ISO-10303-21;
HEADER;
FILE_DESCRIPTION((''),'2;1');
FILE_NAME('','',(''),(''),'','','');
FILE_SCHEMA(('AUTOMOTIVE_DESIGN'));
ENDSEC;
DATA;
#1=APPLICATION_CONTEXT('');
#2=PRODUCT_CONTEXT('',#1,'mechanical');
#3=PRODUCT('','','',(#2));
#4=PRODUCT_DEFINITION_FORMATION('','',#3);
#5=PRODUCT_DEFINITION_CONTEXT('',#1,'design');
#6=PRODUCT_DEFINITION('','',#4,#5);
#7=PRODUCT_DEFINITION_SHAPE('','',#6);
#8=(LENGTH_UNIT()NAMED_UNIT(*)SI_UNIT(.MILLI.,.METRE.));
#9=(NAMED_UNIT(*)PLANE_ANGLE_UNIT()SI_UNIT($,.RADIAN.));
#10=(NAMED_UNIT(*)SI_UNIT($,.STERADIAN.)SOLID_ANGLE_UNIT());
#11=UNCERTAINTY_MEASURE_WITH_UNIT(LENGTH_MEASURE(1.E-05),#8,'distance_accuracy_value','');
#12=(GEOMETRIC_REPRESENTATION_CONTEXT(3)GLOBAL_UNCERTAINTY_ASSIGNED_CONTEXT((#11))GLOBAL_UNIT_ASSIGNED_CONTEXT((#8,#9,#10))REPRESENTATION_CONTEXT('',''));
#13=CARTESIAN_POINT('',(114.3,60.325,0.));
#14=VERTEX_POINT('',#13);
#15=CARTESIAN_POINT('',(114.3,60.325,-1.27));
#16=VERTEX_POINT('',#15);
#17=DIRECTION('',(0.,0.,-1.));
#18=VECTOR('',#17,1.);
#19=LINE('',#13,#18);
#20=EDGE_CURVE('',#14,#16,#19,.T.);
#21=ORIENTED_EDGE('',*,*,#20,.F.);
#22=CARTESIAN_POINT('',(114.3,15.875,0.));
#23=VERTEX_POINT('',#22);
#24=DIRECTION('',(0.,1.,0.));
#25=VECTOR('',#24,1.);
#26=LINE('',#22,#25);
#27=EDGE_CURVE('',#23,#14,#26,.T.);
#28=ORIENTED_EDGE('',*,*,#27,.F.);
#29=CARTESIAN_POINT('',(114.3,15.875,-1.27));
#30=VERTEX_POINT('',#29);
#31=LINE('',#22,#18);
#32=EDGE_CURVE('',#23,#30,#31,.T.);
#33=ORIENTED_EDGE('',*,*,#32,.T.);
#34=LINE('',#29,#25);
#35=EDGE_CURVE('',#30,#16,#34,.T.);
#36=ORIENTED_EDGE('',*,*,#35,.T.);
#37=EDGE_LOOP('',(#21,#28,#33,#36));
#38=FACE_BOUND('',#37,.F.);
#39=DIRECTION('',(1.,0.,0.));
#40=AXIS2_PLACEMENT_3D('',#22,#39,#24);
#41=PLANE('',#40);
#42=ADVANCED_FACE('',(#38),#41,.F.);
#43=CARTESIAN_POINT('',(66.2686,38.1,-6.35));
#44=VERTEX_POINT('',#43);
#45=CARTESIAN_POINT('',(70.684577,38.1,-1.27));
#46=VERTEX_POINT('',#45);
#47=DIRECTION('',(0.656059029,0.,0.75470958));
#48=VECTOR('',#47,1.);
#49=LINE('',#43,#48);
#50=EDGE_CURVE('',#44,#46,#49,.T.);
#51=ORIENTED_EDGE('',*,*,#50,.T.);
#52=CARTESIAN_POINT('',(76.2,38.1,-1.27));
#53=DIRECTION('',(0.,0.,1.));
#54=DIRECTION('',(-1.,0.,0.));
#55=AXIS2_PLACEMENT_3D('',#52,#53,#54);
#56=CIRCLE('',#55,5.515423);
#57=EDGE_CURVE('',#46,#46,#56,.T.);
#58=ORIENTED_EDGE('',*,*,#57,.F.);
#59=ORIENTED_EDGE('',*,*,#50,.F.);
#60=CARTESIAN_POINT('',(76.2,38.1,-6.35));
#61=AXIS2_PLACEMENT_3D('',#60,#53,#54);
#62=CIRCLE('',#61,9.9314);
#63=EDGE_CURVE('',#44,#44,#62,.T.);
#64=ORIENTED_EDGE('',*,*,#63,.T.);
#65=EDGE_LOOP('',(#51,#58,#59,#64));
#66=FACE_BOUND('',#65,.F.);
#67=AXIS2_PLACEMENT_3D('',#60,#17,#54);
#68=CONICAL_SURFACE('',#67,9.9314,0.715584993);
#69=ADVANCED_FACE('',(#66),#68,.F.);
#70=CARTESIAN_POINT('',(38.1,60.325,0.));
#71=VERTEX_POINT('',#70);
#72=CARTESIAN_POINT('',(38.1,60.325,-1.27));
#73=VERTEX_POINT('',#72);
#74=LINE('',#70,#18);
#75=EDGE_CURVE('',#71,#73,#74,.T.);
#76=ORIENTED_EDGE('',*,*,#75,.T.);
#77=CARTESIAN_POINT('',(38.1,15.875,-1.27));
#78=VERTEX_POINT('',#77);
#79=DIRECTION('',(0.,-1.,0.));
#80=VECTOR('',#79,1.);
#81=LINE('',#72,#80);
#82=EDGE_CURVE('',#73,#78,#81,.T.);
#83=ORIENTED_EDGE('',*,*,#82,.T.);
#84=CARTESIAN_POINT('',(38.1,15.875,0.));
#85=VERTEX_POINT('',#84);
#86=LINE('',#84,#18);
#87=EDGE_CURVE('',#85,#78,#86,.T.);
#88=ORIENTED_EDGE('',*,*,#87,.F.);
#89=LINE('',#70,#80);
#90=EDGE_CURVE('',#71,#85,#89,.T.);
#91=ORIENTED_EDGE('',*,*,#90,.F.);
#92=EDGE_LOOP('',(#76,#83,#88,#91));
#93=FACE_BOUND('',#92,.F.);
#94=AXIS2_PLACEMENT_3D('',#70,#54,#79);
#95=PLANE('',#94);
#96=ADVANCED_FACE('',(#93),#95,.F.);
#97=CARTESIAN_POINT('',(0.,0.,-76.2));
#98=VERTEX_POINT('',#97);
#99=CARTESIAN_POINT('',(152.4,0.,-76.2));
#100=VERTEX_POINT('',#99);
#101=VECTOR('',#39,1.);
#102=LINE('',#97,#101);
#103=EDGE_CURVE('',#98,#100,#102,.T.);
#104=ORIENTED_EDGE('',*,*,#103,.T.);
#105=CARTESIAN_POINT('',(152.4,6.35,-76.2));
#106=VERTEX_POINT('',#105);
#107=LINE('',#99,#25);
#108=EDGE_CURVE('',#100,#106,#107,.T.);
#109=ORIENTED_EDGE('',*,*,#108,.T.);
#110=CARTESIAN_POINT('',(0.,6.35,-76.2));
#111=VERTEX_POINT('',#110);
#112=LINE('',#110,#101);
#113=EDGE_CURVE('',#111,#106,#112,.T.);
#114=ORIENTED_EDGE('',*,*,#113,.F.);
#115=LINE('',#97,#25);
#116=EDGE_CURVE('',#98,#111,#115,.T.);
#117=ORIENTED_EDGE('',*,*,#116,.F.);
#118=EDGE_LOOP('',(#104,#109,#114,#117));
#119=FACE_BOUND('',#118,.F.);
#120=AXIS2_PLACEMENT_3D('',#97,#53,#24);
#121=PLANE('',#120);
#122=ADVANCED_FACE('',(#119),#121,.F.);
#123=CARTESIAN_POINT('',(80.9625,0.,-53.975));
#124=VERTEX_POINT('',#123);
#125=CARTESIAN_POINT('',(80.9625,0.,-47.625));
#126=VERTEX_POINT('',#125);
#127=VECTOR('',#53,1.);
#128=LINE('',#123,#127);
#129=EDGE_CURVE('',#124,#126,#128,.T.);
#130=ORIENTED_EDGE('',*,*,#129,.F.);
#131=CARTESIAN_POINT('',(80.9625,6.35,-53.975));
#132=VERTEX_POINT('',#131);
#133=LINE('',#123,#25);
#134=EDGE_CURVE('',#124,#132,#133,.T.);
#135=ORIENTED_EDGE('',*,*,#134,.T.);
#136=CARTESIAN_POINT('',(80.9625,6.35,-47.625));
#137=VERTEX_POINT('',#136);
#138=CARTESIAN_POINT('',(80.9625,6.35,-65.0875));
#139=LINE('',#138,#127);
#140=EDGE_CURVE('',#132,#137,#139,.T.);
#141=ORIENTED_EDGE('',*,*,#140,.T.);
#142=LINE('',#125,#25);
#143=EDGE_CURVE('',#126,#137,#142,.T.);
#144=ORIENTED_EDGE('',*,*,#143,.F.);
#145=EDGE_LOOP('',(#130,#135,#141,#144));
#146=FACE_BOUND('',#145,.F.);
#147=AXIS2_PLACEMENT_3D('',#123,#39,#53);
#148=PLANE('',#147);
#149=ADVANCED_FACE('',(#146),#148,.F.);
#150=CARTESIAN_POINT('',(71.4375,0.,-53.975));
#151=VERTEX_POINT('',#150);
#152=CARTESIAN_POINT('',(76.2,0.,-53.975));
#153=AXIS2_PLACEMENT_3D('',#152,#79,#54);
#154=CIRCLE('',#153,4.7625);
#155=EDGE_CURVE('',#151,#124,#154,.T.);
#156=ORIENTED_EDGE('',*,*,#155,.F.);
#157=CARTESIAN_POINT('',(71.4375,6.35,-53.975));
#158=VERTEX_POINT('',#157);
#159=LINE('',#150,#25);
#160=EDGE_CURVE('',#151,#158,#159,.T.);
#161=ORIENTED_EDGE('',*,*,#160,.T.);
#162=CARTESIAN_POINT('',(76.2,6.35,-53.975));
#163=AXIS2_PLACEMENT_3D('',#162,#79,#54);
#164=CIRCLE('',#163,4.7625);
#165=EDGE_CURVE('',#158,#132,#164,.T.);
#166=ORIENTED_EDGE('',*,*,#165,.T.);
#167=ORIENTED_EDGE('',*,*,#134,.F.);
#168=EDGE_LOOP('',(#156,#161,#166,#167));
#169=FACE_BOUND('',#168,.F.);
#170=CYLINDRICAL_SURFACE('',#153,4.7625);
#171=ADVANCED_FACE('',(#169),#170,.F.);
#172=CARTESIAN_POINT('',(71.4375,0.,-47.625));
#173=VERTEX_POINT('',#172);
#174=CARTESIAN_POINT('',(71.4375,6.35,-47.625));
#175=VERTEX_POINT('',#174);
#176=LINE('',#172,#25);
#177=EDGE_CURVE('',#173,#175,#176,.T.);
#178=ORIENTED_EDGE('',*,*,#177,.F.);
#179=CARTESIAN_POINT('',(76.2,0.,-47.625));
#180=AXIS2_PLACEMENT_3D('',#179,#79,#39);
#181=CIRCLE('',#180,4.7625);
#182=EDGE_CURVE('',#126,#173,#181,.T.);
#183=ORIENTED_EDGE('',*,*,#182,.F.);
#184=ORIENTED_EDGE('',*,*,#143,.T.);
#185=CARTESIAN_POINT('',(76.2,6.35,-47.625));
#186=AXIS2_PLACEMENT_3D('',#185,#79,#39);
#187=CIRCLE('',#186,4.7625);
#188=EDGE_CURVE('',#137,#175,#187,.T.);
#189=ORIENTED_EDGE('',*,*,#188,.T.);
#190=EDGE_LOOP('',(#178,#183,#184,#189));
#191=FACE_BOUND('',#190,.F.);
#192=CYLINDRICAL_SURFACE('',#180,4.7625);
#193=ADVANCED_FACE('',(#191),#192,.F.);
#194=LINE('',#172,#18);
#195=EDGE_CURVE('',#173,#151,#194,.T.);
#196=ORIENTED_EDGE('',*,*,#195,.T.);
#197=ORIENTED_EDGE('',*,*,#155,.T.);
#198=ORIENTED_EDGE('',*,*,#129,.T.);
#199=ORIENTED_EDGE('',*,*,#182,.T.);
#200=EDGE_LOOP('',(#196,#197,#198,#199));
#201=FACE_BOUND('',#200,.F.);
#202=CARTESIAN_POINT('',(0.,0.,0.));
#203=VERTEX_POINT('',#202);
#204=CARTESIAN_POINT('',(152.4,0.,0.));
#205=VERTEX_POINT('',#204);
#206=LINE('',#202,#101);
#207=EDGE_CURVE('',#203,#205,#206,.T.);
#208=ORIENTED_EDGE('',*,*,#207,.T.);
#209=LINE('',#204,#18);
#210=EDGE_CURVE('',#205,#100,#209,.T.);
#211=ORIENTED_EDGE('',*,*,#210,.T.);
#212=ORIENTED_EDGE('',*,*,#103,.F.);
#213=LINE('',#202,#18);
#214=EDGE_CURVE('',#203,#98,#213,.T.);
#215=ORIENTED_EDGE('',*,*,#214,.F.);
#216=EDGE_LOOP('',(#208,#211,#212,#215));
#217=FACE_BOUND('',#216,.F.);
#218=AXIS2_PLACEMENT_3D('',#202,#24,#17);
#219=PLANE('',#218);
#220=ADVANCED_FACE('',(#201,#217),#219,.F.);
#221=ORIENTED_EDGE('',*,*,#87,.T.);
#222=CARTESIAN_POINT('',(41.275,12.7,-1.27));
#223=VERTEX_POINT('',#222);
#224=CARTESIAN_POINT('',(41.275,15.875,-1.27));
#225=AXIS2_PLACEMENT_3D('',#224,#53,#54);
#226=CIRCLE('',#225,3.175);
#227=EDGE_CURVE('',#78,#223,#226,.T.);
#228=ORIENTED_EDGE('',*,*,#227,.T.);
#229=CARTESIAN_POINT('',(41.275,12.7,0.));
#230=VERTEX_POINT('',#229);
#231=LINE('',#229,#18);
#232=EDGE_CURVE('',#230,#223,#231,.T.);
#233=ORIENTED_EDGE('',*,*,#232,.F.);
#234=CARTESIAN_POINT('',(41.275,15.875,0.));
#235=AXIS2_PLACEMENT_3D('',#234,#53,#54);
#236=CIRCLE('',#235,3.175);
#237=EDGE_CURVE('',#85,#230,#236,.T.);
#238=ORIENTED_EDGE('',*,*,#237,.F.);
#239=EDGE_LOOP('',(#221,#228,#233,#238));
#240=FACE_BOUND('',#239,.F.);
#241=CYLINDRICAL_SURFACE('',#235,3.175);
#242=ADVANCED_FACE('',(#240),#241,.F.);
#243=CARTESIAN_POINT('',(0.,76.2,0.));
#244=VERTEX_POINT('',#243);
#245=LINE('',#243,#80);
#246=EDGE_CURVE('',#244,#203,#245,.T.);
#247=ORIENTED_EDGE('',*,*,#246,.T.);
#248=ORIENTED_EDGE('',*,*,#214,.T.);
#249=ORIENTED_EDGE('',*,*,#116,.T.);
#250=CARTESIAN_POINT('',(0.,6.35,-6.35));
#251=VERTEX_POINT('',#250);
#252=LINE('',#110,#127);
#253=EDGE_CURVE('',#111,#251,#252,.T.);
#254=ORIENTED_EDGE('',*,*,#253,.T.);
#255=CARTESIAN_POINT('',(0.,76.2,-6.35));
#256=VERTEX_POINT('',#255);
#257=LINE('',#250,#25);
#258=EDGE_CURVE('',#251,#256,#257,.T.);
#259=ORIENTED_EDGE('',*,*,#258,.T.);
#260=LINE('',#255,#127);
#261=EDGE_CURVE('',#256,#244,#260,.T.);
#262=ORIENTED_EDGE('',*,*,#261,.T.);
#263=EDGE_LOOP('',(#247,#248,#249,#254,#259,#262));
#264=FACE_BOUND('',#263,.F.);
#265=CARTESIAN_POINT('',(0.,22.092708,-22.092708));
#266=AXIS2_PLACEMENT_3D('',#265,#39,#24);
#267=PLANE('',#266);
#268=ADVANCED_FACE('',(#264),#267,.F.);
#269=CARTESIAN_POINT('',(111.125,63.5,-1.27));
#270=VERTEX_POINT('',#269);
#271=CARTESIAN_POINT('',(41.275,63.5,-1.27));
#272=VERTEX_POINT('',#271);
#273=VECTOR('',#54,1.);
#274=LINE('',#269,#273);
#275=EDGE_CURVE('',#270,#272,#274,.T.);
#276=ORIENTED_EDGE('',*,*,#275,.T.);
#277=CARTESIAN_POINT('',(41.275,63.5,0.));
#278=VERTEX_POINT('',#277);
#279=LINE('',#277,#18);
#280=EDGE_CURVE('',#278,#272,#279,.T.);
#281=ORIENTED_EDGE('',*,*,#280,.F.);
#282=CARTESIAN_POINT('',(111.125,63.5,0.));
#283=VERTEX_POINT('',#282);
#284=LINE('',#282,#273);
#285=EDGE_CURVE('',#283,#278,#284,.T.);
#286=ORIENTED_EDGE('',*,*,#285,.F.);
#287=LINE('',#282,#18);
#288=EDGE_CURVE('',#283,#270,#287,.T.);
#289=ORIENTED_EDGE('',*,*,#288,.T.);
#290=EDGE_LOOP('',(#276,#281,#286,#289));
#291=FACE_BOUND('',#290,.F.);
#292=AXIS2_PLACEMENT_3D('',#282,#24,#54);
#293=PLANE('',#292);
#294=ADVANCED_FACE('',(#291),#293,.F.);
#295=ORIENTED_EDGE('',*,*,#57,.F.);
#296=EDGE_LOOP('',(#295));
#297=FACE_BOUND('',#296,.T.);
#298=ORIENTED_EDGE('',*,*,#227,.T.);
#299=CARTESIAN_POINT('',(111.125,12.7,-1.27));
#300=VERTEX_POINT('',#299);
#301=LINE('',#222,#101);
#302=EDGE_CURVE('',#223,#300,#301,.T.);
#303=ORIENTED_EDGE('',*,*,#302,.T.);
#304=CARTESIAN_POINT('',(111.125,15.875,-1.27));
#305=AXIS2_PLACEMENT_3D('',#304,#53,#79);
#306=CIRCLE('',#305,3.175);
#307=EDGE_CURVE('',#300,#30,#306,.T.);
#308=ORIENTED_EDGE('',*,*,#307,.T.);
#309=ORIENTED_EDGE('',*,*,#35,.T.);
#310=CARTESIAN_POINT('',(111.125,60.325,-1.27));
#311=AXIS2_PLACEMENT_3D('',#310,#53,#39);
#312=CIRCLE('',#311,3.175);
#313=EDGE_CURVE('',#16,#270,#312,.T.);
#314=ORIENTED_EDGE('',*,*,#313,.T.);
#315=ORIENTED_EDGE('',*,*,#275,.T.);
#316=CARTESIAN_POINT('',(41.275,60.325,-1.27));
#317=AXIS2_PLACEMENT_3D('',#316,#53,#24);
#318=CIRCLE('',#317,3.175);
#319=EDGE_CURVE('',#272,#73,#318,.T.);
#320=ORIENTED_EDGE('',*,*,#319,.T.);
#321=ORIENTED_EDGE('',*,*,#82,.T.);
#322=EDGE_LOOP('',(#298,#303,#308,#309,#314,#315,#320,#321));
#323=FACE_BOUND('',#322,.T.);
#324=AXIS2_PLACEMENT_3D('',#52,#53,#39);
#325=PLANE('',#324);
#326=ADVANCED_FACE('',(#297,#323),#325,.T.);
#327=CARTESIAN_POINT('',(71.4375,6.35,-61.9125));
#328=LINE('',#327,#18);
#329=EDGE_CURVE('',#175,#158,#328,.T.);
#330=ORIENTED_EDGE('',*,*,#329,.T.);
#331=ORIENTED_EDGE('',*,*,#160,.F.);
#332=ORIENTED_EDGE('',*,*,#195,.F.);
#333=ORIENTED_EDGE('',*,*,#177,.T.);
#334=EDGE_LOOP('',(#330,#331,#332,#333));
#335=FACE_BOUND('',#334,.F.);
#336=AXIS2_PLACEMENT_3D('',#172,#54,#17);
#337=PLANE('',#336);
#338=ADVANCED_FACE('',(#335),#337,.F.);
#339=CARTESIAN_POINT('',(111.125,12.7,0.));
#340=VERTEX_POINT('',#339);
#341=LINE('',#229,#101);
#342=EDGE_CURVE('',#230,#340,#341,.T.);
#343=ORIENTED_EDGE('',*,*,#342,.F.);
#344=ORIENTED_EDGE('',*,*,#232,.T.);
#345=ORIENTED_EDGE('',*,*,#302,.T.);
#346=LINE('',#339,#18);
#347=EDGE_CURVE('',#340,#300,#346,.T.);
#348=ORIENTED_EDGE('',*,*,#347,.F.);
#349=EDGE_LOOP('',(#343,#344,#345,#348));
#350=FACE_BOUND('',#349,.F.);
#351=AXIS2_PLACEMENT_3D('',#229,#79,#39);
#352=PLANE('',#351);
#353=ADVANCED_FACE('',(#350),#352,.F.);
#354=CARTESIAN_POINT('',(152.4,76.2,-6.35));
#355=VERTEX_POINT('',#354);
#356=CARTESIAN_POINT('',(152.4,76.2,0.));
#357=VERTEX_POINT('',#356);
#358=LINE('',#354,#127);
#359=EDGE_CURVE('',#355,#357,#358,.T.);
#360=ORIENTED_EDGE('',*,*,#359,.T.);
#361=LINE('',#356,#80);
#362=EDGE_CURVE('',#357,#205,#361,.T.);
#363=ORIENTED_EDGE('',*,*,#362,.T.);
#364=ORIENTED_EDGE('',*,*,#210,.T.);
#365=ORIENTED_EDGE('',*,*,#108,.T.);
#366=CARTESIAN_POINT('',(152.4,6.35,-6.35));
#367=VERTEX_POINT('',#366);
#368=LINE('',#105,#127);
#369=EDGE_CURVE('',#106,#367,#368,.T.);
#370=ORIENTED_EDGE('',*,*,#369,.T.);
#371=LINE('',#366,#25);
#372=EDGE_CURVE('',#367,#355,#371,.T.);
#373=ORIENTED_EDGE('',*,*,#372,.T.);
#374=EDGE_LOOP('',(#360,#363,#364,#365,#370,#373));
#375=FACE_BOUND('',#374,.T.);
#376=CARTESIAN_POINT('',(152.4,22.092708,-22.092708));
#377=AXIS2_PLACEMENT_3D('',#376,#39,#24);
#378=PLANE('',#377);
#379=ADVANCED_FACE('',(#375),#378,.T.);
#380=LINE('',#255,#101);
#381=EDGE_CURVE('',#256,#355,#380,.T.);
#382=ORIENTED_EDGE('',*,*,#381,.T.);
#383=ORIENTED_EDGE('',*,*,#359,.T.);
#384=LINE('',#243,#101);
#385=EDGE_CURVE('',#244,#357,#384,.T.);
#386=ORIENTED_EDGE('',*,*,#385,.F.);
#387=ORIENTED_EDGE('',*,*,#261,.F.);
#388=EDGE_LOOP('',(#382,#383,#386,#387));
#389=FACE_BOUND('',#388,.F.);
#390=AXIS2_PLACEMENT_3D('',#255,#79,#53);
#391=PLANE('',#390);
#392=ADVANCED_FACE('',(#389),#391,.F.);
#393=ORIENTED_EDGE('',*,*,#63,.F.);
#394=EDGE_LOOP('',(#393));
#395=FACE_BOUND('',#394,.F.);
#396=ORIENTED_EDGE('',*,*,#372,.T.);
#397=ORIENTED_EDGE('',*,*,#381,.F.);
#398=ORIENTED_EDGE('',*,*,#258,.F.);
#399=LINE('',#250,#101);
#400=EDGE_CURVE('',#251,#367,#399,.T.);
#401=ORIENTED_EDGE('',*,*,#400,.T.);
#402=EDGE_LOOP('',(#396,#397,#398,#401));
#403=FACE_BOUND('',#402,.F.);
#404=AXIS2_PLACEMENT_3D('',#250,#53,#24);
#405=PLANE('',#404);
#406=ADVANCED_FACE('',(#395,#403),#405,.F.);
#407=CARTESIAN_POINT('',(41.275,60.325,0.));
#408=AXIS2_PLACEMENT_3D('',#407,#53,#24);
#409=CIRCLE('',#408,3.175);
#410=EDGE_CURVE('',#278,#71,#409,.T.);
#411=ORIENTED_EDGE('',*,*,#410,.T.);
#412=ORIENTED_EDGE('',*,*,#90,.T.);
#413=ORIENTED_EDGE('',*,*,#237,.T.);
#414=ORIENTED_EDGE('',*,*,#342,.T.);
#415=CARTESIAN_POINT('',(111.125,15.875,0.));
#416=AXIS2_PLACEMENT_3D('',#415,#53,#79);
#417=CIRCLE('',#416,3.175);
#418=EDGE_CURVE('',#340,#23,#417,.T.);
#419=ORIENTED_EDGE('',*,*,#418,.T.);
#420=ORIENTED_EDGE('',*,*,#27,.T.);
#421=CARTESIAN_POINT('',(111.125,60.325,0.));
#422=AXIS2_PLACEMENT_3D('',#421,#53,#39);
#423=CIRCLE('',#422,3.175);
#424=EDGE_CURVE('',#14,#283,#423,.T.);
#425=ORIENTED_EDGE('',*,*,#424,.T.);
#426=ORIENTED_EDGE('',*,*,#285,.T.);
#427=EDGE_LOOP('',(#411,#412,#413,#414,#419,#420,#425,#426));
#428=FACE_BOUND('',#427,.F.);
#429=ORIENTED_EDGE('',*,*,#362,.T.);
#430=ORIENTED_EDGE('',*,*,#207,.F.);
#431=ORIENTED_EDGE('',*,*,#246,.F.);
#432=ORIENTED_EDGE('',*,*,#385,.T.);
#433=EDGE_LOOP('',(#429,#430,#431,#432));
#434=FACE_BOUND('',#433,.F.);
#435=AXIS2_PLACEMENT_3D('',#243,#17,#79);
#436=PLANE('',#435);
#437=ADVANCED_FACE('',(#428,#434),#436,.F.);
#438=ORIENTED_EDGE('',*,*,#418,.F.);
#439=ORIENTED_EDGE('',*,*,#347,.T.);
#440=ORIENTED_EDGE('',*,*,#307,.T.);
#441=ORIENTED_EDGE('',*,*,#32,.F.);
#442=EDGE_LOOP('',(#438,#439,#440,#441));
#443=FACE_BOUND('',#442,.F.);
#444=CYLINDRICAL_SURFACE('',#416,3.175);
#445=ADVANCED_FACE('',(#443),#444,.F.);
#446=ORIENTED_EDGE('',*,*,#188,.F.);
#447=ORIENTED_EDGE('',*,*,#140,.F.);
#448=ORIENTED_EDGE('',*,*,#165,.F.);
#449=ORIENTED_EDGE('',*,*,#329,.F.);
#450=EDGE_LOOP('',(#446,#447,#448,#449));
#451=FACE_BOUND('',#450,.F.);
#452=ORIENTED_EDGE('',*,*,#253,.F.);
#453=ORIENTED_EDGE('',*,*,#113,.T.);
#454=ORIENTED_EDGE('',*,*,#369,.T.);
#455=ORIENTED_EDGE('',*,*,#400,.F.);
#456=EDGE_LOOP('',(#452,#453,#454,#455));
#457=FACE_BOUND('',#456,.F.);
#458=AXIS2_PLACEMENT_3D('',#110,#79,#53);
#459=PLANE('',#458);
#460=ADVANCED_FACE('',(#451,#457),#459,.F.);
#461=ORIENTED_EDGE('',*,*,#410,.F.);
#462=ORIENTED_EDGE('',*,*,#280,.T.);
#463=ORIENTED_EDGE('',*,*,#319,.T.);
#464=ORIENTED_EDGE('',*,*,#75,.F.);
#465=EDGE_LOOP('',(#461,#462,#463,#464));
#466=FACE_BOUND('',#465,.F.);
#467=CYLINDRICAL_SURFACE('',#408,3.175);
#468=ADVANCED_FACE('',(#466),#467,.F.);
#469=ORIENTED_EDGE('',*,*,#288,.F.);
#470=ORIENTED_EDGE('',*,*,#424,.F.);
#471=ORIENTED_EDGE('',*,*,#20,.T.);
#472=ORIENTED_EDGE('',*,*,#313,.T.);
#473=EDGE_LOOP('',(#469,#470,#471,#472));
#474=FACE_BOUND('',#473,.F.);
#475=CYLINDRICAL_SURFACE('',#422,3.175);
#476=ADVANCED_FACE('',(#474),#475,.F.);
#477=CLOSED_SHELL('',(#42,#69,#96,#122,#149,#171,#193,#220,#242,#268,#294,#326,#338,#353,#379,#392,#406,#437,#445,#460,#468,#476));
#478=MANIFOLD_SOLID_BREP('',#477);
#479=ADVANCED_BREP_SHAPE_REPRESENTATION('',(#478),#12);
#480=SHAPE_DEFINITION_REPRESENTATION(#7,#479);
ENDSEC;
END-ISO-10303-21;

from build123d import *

# Parameters (mm, degrees)
F1_DEPTH       = 152.4
F3_D           = 9.525
F3_CSINK_D     = 19.8628
F3_CSINK_ANGLE = 82
F4_R           = 4.7625
F5_DEPTH       = 1.27
F7_DEPTH       = 76.201


# Not quite as in the source:
# - a length typed as a fraction of an inch, garbled in the dataset ("3 / 203.2 mm" for 3/8 in), is restored
# - a feature names something its author has since deleted; it is built from what else it names


with BuildPart() as f1:
    # F0 (on Right) → F1 (new body)
    with BuildSketch(Plane.YZ):
        Polygon((76.2, -6.35), (76.2, 0), (0, 0), (0, -76.2), (6.35, -76.2), (6.35, -6.35), align=None)
    extrude(amount=F1_DEPTH)

    # F3 (through all)
    with Locations(Plane(origin=(0, 0, -6.35), x_dir=(1, 0, 0), z_dir=(0, 0, -1))):
        with Locations((76.2, -38.1)):
            CounterSinkHole(F3_D / 2, F3_CSINK_D / 2, counter_sink_angle=F3_CSINK_ANGLE)

    # F4 (on face) → F5 (cut)
    with BuildSketch(Plane.XY):
        with BuildLine():
            Line((111.125, 63.5), (41.275, 63.5))
            ThreePointArc((41.275, 63.5), (39.0299359697, 62.5700640303), (38.1, 60.325))
            Line((38.1, 60.325), (38.1, 15.875))
            ThreePointArc((38.1, 15.875), (39.0299359697, 13.6299359697), (41.275, 12.7))
            Line((41.275, 12.7), (111.125, 12.7))
            ThreePointArc((111.125, 12.7), (113.3700640303, 13.6299359697), (114.3, 15.875))
            Line((114.3, 15.875), (114.3, 60.325))
            ThreePointArc((114.3, 60.325), (113.3700640303, 62.5700640303), (111.125, 63.5))
        make_face()
        with Locations((76.2, 38.1)):
            Circle(F4_R, mode=Mode.SUBTRACT)
    extrude(amount=-F5_DEPTH, mode=Mode.SUBTRACT)

    # F6 (on face) → F7 (cut, through all)
    with BuildSketch(Plane.XZ):
        with BuildLine():
            Line((71.4375, -47.625), (71.4375, -53.975))
            ThreePointArc((71.4375, -53.975), (76.2, -58.7375), (80.9625, -53.975))
            Line((80.9625, -53.975), (80.9625, -47.625))
            ThreePointArc((80.9625, -47.625), (76.2, -42.8625), (71.4375, -47.625))
        make_face()
    extrude(amount=-F7_DEPTH, mode=Mode.SUBTRACT)


solid = f1.part
